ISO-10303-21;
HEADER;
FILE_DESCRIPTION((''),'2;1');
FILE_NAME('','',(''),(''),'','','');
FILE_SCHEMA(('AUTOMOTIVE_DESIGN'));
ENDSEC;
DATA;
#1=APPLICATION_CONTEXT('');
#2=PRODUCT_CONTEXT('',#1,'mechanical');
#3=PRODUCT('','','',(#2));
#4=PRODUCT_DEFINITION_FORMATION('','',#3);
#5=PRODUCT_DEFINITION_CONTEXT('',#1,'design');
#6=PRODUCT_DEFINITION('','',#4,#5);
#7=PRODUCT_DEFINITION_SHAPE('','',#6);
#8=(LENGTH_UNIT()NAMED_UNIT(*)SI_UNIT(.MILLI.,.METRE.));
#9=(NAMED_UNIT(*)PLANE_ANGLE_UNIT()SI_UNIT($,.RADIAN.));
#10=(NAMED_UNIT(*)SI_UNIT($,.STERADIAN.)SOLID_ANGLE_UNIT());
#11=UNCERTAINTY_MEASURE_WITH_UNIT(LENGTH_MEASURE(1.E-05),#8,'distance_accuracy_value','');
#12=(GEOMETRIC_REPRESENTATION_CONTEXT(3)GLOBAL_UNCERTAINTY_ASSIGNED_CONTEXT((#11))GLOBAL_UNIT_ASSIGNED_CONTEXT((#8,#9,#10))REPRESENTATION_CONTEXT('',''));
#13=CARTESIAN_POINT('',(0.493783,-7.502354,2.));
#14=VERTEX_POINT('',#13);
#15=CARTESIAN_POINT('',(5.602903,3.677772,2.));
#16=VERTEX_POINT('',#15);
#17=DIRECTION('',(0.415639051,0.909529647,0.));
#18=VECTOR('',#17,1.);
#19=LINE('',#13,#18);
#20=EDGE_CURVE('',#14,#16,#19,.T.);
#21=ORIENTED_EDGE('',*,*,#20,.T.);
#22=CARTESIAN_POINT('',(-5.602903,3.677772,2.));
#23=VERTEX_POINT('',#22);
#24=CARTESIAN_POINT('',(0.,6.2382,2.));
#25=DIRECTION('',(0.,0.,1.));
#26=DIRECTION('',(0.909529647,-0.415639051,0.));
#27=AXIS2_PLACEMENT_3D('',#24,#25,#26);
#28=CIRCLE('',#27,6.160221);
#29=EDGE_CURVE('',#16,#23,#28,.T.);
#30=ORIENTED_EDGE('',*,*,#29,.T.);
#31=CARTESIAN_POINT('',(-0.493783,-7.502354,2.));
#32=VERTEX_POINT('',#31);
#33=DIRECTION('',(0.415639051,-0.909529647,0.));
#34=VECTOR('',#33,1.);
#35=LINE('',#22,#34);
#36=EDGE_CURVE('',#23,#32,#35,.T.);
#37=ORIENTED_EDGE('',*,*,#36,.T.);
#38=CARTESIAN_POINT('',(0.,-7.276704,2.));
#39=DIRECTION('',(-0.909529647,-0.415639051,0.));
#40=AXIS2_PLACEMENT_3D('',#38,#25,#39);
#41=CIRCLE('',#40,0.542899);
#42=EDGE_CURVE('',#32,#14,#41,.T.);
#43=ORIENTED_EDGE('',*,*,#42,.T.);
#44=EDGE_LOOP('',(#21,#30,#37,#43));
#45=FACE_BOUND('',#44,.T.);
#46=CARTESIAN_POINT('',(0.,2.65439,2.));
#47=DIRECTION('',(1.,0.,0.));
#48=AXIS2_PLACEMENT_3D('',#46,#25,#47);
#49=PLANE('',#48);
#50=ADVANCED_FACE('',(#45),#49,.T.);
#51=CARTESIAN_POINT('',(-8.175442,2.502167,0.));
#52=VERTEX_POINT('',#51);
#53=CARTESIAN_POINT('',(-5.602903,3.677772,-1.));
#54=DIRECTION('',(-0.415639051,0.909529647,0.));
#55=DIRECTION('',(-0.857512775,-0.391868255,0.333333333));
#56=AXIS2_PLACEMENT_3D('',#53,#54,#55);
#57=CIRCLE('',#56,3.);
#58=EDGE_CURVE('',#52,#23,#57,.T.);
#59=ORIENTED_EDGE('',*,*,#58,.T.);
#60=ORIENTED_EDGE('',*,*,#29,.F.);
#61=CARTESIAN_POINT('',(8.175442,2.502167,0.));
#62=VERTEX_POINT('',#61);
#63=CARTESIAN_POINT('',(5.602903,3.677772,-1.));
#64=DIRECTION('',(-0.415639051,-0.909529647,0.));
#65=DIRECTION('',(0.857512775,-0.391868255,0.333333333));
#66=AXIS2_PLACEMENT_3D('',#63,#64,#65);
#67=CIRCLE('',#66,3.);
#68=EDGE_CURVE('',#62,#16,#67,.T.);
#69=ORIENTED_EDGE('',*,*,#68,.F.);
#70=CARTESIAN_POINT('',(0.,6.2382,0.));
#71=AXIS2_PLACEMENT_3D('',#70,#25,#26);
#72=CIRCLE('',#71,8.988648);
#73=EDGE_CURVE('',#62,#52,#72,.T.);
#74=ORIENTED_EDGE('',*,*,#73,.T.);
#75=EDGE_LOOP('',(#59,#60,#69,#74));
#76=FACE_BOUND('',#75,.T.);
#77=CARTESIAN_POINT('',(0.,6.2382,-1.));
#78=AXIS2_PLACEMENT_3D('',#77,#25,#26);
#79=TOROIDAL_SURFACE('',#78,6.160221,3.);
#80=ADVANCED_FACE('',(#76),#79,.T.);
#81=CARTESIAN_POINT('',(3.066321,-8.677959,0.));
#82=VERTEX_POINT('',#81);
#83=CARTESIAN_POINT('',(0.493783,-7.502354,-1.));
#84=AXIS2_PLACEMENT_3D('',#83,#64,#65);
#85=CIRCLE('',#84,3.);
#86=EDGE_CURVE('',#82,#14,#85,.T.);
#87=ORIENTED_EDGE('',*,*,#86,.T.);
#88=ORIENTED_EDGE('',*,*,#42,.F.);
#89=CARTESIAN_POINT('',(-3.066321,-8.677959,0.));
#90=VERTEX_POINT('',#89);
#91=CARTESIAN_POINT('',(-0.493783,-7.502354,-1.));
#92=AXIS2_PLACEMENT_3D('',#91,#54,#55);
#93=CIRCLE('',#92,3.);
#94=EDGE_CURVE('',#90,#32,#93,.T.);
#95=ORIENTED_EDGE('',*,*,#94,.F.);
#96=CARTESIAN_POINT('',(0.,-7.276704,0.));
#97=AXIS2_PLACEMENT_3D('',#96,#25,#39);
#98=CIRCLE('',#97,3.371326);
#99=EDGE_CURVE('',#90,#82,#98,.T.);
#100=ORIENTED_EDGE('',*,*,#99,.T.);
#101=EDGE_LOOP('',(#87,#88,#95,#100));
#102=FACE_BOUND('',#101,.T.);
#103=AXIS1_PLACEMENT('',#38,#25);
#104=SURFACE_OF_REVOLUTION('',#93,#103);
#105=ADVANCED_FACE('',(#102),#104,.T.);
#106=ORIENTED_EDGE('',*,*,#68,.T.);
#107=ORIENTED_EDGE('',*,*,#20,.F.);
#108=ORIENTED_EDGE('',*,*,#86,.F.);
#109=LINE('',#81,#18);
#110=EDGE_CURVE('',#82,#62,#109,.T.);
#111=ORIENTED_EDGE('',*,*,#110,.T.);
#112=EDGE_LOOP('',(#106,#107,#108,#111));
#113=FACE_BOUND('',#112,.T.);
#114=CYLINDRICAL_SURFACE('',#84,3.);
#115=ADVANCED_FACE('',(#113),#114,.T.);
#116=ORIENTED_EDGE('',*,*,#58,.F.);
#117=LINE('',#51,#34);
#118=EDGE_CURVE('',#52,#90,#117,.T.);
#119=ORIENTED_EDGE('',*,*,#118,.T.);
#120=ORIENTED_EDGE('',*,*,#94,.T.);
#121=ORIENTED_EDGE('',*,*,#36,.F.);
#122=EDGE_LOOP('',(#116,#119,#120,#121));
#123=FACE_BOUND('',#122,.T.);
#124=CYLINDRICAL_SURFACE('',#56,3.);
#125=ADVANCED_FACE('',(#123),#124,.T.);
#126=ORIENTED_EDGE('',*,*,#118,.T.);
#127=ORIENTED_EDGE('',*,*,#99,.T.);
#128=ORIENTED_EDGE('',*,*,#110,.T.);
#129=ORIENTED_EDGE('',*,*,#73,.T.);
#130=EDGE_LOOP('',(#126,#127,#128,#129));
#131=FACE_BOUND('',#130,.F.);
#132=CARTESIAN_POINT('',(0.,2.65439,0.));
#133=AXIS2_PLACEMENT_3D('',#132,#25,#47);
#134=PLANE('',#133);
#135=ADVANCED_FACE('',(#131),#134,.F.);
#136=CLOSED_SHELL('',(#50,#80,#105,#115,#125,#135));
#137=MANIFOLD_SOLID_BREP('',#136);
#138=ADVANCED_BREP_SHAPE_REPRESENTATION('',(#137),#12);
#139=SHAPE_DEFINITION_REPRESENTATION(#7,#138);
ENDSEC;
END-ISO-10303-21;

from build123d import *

# Parameters (mm, degrees)
F1_DEPTH    = 2
F2_T1_DEPTH = 12.292205585
F2_T3_DEPTH = 12.292205585
F2_T6_ANGLE = 229.1191340219
F2_T8_ANGLE = 130.8808659781


# Not quite as in the source:
# - a fillet or chamfer that OpenCascade refuses, or shapes differently, is made with other operations: its cross-section is extruded or revolved along the edge and cut away or added


with BuildPart() as f1:
    # F0 (on Top) → F1 (new body)
    with BuildSketch(Plane.XY):
        with BuildLine():
            Line((-8.1754417997, 2.5021668996), (-3.0663211364, -8.6779585108))
            ThreePointArc((-3.0663211364, -8.6779585108), (0, -10.648029893), (3.0663211364, -8.6779585108))
            Line((3.0663211364, -8.6779585108), (8.1754417997, 2.5021668996))
            ThreePointArc((8.1754417997, 2.5021668996), (0, 15.2268479526), (-8.1754417997, 2.5021668996))
        make_face()
    extrude(amount=F1_DEPTH)

    # F2: fillet of radius 3 on 4 edges, made by hand

    # F2_s2 → F2_t1 (cut)
    with BuildSketch(Plane(origin=(-2.7508562412, -6.0196107686, 0), x_dir=(0, 0, 1), z_dir=(0.4156390509, 0.9095296473, 0))):
        with BuildLine():
            ThreePointArc((0, 6.3958084213), (1.4494897428, 5.2994321041), (2, 3.5673812965))
            Line((2, 3.5673812965), (2, 6.3958084213))
            Line((2, 6.3958084213), (0, 6.3958084213))
        make_face()
    extrude(amount=F2_T1_DEPTH, mode=Mode.SUBTRACT)

    # F2_s4 → F2_t3 (cut)
    with BuildSketch(Plane(origin=(-2.358264422, 5.1605146418, 0), x_dir=(0, 0, 1), z_dir=(0.4156390509, -0.9095296473, 0))):
        with BuildLine():
            ThreePointArc((0, 6.3958084213), (1.4494897428, 5.2994321041), (2, 3.5673812965))
            Line((2, 3.5673812965), (2, 6.3958084213))
            Line((2, 6.3958084213), (0, 6.3958084213))
        make_face()
    extrude(amount=F2_T3_DEPTH, mode=Mode.SUBTRACT)

    # F2_s5 → F2_t6 (revolve, cut)
    with BuildSketch(Plane(origin=(2.358264422, 5.1605146418, 0), x_dir=(0, 0, 1), z_dir=(-0.4156390509, -0.9095296473, 0))):
        with BuildLine():
            ThreePointArc((0, -6.3958084213), (1.4494897428, -5.2994321041), (2, -3.5673812965))
            Line((2, -3.5673812965), (2, -6.3958084213))
            Line((2, -6.3958084213), (0, -6.3958084213))
        make_face()
    revolve(axis=Axis((0, 6.2382000027, 2), (0, 0, 1)), revolution_arc=F2_T6_ANGLE, mode=Mode.SUBTRACT)

    # F2_s7 → F2_t8 (revolve, cut)
    with BuildSketch(Plane(origin=(2.7508562412, -6.0196107686, 0), x_dir=(0, 0, 1), z_dir=(-0.4156390509, 0.9095296473, 0))):
        with BuildLine():
            ThreePointArc((0, -6.3958084213), (1.4494897428, -5.2994321041), (2, -3.5673812965))
            Line((2, -3.5673812965), (2, -6.3958084213))
            Line((2, -6.3958084213), (0, -6.3958084213))
        make_face()
    revolve(axis=Axis((0, -7.2767036856, 2), (0, 0, 1)), revolution_arc=F2_T8_ANGLE, mode=Mode.SUBTRACT)


solid = f1.part
